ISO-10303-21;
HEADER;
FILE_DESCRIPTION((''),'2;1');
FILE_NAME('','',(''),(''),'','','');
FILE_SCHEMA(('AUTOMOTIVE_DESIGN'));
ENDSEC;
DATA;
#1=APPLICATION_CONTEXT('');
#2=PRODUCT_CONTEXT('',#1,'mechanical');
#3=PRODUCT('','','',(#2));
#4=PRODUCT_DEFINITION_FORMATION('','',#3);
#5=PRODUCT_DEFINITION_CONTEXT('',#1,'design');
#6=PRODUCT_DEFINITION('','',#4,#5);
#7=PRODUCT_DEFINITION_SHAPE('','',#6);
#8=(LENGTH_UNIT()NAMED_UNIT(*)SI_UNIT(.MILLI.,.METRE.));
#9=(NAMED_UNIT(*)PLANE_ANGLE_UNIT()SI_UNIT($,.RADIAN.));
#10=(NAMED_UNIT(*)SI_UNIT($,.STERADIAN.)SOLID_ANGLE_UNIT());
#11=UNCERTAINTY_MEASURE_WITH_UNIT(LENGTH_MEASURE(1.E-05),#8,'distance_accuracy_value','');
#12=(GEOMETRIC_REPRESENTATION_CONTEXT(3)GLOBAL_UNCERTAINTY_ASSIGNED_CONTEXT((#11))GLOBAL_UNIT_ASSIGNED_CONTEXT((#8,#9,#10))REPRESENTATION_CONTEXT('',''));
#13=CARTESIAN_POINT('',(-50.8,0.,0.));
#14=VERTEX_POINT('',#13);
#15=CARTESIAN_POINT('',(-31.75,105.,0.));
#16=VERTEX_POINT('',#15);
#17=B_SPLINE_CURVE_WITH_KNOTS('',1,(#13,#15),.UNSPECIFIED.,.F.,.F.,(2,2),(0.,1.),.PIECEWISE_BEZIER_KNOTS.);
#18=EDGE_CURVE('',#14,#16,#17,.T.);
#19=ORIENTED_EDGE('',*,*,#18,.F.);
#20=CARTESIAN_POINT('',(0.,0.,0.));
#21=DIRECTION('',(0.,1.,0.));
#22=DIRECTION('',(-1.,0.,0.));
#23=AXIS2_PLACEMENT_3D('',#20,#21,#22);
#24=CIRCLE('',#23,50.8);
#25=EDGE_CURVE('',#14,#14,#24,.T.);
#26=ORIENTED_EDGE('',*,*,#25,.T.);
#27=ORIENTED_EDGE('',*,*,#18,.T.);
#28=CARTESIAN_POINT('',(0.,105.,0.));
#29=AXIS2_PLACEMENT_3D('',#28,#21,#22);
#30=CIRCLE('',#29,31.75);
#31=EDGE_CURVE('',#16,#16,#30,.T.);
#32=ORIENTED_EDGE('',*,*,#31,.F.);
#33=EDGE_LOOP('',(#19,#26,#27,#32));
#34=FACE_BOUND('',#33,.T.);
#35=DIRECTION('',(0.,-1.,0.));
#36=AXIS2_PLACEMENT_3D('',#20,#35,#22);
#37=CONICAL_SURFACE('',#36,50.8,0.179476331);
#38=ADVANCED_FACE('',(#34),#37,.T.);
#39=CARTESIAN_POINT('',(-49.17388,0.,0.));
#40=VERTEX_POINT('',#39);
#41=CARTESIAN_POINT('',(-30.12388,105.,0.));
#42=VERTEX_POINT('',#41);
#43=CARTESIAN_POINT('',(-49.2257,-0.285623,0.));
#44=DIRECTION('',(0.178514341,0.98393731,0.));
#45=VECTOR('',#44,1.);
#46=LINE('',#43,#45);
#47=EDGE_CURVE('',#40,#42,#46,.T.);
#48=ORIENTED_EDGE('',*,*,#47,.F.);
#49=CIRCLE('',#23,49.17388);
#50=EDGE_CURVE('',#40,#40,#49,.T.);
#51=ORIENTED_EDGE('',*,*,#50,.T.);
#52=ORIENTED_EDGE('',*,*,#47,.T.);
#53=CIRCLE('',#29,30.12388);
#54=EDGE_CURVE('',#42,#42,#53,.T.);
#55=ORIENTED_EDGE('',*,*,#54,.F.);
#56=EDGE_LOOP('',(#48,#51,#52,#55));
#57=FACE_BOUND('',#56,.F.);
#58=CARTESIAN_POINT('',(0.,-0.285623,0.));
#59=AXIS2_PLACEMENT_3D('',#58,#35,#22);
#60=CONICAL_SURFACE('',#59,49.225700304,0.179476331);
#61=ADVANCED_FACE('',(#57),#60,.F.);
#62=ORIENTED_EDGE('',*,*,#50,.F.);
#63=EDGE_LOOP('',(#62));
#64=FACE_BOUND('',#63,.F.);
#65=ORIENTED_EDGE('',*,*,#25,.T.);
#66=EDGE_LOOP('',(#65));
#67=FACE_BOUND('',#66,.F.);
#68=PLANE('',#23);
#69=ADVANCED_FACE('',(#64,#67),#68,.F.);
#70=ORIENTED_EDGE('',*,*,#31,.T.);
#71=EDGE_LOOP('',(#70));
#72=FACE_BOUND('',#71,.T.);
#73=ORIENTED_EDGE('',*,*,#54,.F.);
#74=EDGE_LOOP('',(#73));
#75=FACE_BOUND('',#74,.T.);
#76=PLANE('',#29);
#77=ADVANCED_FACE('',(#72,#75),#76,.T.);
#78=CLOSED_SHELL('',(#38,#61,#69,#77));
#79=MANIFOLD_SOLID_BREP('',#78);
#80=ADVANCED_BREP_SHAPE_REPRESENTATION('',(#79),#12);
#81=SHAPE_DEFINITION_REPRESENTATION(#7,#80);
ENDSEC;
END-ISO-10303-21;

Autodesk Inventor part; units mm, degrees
ref_plane "YZ Plane" through (0, 0, 0) normal (1, 0, 0) x (0, 1, 0)
ref_plane "XY Plane" through (0, 0, 0) normal (0, 0, 1) x (1, 0, 0)
sketch "Szkic6" plane through (0, 0, 0) normal (0, 1, 0) x (-1, 0, 0)
  circle A0 centre (0, 0) radius 50.8
  dimension "d33" = 101.6
ref_plane "Płaszczyzna konstrukcyjna1" through (0, 105, 0) normal (0, 1, 0) x (-1, 0, 0)
sketch "Szkic7" plane through (0, 105, 0) normal (0, 1, 0) x (-1, 0, 0)
  circle A0 centre (0, 0) radius 31.75
  dimension "d35" = 63.5
loft "Wyciągnięcie złożone1" add profiles "Szkic6", "Szkic7"
shell "Skorupa1" thickness 1.6 removed faces 2 at (14.3997, 105, 5.5289) at (7.3018, 0, 11.5135)
equation "\"d33\" = OD1"
equation "\"d35\" = OD2"
equation "\"d52\" = THK"
equation "\"SzerokośćGięciaPodcięcia\" = Grubość"
equation "\"RozmiarPodcięciaNarożnika\" = 4 * Grubość"
equation "\"PromieńPrzejścia\" = PromieńGięcia"
equation "\"Rozmiar_promienia_Jacobiego\" = PromieńGięcia"
equation "\"Wielk_odstępu\" = Grubość"
equation "\"d2\" = PromieńGięcia"
equation "\"d23\" = PromieńGięcia"
equation "\"OD1\" = 101.6"
equation "\"OD2\" = 63.5"
equation "\"L\" = 105"
equation "\"THK\" = 1.6"
equation "\"d34\" = L"
equation "\"Grubość\" = 1.5"
equation "\"PromieńGięcia\" = 3"
properties part number "Redukcja symetryczna Ø101,6x63,5x1,6 L=105" material "304"
